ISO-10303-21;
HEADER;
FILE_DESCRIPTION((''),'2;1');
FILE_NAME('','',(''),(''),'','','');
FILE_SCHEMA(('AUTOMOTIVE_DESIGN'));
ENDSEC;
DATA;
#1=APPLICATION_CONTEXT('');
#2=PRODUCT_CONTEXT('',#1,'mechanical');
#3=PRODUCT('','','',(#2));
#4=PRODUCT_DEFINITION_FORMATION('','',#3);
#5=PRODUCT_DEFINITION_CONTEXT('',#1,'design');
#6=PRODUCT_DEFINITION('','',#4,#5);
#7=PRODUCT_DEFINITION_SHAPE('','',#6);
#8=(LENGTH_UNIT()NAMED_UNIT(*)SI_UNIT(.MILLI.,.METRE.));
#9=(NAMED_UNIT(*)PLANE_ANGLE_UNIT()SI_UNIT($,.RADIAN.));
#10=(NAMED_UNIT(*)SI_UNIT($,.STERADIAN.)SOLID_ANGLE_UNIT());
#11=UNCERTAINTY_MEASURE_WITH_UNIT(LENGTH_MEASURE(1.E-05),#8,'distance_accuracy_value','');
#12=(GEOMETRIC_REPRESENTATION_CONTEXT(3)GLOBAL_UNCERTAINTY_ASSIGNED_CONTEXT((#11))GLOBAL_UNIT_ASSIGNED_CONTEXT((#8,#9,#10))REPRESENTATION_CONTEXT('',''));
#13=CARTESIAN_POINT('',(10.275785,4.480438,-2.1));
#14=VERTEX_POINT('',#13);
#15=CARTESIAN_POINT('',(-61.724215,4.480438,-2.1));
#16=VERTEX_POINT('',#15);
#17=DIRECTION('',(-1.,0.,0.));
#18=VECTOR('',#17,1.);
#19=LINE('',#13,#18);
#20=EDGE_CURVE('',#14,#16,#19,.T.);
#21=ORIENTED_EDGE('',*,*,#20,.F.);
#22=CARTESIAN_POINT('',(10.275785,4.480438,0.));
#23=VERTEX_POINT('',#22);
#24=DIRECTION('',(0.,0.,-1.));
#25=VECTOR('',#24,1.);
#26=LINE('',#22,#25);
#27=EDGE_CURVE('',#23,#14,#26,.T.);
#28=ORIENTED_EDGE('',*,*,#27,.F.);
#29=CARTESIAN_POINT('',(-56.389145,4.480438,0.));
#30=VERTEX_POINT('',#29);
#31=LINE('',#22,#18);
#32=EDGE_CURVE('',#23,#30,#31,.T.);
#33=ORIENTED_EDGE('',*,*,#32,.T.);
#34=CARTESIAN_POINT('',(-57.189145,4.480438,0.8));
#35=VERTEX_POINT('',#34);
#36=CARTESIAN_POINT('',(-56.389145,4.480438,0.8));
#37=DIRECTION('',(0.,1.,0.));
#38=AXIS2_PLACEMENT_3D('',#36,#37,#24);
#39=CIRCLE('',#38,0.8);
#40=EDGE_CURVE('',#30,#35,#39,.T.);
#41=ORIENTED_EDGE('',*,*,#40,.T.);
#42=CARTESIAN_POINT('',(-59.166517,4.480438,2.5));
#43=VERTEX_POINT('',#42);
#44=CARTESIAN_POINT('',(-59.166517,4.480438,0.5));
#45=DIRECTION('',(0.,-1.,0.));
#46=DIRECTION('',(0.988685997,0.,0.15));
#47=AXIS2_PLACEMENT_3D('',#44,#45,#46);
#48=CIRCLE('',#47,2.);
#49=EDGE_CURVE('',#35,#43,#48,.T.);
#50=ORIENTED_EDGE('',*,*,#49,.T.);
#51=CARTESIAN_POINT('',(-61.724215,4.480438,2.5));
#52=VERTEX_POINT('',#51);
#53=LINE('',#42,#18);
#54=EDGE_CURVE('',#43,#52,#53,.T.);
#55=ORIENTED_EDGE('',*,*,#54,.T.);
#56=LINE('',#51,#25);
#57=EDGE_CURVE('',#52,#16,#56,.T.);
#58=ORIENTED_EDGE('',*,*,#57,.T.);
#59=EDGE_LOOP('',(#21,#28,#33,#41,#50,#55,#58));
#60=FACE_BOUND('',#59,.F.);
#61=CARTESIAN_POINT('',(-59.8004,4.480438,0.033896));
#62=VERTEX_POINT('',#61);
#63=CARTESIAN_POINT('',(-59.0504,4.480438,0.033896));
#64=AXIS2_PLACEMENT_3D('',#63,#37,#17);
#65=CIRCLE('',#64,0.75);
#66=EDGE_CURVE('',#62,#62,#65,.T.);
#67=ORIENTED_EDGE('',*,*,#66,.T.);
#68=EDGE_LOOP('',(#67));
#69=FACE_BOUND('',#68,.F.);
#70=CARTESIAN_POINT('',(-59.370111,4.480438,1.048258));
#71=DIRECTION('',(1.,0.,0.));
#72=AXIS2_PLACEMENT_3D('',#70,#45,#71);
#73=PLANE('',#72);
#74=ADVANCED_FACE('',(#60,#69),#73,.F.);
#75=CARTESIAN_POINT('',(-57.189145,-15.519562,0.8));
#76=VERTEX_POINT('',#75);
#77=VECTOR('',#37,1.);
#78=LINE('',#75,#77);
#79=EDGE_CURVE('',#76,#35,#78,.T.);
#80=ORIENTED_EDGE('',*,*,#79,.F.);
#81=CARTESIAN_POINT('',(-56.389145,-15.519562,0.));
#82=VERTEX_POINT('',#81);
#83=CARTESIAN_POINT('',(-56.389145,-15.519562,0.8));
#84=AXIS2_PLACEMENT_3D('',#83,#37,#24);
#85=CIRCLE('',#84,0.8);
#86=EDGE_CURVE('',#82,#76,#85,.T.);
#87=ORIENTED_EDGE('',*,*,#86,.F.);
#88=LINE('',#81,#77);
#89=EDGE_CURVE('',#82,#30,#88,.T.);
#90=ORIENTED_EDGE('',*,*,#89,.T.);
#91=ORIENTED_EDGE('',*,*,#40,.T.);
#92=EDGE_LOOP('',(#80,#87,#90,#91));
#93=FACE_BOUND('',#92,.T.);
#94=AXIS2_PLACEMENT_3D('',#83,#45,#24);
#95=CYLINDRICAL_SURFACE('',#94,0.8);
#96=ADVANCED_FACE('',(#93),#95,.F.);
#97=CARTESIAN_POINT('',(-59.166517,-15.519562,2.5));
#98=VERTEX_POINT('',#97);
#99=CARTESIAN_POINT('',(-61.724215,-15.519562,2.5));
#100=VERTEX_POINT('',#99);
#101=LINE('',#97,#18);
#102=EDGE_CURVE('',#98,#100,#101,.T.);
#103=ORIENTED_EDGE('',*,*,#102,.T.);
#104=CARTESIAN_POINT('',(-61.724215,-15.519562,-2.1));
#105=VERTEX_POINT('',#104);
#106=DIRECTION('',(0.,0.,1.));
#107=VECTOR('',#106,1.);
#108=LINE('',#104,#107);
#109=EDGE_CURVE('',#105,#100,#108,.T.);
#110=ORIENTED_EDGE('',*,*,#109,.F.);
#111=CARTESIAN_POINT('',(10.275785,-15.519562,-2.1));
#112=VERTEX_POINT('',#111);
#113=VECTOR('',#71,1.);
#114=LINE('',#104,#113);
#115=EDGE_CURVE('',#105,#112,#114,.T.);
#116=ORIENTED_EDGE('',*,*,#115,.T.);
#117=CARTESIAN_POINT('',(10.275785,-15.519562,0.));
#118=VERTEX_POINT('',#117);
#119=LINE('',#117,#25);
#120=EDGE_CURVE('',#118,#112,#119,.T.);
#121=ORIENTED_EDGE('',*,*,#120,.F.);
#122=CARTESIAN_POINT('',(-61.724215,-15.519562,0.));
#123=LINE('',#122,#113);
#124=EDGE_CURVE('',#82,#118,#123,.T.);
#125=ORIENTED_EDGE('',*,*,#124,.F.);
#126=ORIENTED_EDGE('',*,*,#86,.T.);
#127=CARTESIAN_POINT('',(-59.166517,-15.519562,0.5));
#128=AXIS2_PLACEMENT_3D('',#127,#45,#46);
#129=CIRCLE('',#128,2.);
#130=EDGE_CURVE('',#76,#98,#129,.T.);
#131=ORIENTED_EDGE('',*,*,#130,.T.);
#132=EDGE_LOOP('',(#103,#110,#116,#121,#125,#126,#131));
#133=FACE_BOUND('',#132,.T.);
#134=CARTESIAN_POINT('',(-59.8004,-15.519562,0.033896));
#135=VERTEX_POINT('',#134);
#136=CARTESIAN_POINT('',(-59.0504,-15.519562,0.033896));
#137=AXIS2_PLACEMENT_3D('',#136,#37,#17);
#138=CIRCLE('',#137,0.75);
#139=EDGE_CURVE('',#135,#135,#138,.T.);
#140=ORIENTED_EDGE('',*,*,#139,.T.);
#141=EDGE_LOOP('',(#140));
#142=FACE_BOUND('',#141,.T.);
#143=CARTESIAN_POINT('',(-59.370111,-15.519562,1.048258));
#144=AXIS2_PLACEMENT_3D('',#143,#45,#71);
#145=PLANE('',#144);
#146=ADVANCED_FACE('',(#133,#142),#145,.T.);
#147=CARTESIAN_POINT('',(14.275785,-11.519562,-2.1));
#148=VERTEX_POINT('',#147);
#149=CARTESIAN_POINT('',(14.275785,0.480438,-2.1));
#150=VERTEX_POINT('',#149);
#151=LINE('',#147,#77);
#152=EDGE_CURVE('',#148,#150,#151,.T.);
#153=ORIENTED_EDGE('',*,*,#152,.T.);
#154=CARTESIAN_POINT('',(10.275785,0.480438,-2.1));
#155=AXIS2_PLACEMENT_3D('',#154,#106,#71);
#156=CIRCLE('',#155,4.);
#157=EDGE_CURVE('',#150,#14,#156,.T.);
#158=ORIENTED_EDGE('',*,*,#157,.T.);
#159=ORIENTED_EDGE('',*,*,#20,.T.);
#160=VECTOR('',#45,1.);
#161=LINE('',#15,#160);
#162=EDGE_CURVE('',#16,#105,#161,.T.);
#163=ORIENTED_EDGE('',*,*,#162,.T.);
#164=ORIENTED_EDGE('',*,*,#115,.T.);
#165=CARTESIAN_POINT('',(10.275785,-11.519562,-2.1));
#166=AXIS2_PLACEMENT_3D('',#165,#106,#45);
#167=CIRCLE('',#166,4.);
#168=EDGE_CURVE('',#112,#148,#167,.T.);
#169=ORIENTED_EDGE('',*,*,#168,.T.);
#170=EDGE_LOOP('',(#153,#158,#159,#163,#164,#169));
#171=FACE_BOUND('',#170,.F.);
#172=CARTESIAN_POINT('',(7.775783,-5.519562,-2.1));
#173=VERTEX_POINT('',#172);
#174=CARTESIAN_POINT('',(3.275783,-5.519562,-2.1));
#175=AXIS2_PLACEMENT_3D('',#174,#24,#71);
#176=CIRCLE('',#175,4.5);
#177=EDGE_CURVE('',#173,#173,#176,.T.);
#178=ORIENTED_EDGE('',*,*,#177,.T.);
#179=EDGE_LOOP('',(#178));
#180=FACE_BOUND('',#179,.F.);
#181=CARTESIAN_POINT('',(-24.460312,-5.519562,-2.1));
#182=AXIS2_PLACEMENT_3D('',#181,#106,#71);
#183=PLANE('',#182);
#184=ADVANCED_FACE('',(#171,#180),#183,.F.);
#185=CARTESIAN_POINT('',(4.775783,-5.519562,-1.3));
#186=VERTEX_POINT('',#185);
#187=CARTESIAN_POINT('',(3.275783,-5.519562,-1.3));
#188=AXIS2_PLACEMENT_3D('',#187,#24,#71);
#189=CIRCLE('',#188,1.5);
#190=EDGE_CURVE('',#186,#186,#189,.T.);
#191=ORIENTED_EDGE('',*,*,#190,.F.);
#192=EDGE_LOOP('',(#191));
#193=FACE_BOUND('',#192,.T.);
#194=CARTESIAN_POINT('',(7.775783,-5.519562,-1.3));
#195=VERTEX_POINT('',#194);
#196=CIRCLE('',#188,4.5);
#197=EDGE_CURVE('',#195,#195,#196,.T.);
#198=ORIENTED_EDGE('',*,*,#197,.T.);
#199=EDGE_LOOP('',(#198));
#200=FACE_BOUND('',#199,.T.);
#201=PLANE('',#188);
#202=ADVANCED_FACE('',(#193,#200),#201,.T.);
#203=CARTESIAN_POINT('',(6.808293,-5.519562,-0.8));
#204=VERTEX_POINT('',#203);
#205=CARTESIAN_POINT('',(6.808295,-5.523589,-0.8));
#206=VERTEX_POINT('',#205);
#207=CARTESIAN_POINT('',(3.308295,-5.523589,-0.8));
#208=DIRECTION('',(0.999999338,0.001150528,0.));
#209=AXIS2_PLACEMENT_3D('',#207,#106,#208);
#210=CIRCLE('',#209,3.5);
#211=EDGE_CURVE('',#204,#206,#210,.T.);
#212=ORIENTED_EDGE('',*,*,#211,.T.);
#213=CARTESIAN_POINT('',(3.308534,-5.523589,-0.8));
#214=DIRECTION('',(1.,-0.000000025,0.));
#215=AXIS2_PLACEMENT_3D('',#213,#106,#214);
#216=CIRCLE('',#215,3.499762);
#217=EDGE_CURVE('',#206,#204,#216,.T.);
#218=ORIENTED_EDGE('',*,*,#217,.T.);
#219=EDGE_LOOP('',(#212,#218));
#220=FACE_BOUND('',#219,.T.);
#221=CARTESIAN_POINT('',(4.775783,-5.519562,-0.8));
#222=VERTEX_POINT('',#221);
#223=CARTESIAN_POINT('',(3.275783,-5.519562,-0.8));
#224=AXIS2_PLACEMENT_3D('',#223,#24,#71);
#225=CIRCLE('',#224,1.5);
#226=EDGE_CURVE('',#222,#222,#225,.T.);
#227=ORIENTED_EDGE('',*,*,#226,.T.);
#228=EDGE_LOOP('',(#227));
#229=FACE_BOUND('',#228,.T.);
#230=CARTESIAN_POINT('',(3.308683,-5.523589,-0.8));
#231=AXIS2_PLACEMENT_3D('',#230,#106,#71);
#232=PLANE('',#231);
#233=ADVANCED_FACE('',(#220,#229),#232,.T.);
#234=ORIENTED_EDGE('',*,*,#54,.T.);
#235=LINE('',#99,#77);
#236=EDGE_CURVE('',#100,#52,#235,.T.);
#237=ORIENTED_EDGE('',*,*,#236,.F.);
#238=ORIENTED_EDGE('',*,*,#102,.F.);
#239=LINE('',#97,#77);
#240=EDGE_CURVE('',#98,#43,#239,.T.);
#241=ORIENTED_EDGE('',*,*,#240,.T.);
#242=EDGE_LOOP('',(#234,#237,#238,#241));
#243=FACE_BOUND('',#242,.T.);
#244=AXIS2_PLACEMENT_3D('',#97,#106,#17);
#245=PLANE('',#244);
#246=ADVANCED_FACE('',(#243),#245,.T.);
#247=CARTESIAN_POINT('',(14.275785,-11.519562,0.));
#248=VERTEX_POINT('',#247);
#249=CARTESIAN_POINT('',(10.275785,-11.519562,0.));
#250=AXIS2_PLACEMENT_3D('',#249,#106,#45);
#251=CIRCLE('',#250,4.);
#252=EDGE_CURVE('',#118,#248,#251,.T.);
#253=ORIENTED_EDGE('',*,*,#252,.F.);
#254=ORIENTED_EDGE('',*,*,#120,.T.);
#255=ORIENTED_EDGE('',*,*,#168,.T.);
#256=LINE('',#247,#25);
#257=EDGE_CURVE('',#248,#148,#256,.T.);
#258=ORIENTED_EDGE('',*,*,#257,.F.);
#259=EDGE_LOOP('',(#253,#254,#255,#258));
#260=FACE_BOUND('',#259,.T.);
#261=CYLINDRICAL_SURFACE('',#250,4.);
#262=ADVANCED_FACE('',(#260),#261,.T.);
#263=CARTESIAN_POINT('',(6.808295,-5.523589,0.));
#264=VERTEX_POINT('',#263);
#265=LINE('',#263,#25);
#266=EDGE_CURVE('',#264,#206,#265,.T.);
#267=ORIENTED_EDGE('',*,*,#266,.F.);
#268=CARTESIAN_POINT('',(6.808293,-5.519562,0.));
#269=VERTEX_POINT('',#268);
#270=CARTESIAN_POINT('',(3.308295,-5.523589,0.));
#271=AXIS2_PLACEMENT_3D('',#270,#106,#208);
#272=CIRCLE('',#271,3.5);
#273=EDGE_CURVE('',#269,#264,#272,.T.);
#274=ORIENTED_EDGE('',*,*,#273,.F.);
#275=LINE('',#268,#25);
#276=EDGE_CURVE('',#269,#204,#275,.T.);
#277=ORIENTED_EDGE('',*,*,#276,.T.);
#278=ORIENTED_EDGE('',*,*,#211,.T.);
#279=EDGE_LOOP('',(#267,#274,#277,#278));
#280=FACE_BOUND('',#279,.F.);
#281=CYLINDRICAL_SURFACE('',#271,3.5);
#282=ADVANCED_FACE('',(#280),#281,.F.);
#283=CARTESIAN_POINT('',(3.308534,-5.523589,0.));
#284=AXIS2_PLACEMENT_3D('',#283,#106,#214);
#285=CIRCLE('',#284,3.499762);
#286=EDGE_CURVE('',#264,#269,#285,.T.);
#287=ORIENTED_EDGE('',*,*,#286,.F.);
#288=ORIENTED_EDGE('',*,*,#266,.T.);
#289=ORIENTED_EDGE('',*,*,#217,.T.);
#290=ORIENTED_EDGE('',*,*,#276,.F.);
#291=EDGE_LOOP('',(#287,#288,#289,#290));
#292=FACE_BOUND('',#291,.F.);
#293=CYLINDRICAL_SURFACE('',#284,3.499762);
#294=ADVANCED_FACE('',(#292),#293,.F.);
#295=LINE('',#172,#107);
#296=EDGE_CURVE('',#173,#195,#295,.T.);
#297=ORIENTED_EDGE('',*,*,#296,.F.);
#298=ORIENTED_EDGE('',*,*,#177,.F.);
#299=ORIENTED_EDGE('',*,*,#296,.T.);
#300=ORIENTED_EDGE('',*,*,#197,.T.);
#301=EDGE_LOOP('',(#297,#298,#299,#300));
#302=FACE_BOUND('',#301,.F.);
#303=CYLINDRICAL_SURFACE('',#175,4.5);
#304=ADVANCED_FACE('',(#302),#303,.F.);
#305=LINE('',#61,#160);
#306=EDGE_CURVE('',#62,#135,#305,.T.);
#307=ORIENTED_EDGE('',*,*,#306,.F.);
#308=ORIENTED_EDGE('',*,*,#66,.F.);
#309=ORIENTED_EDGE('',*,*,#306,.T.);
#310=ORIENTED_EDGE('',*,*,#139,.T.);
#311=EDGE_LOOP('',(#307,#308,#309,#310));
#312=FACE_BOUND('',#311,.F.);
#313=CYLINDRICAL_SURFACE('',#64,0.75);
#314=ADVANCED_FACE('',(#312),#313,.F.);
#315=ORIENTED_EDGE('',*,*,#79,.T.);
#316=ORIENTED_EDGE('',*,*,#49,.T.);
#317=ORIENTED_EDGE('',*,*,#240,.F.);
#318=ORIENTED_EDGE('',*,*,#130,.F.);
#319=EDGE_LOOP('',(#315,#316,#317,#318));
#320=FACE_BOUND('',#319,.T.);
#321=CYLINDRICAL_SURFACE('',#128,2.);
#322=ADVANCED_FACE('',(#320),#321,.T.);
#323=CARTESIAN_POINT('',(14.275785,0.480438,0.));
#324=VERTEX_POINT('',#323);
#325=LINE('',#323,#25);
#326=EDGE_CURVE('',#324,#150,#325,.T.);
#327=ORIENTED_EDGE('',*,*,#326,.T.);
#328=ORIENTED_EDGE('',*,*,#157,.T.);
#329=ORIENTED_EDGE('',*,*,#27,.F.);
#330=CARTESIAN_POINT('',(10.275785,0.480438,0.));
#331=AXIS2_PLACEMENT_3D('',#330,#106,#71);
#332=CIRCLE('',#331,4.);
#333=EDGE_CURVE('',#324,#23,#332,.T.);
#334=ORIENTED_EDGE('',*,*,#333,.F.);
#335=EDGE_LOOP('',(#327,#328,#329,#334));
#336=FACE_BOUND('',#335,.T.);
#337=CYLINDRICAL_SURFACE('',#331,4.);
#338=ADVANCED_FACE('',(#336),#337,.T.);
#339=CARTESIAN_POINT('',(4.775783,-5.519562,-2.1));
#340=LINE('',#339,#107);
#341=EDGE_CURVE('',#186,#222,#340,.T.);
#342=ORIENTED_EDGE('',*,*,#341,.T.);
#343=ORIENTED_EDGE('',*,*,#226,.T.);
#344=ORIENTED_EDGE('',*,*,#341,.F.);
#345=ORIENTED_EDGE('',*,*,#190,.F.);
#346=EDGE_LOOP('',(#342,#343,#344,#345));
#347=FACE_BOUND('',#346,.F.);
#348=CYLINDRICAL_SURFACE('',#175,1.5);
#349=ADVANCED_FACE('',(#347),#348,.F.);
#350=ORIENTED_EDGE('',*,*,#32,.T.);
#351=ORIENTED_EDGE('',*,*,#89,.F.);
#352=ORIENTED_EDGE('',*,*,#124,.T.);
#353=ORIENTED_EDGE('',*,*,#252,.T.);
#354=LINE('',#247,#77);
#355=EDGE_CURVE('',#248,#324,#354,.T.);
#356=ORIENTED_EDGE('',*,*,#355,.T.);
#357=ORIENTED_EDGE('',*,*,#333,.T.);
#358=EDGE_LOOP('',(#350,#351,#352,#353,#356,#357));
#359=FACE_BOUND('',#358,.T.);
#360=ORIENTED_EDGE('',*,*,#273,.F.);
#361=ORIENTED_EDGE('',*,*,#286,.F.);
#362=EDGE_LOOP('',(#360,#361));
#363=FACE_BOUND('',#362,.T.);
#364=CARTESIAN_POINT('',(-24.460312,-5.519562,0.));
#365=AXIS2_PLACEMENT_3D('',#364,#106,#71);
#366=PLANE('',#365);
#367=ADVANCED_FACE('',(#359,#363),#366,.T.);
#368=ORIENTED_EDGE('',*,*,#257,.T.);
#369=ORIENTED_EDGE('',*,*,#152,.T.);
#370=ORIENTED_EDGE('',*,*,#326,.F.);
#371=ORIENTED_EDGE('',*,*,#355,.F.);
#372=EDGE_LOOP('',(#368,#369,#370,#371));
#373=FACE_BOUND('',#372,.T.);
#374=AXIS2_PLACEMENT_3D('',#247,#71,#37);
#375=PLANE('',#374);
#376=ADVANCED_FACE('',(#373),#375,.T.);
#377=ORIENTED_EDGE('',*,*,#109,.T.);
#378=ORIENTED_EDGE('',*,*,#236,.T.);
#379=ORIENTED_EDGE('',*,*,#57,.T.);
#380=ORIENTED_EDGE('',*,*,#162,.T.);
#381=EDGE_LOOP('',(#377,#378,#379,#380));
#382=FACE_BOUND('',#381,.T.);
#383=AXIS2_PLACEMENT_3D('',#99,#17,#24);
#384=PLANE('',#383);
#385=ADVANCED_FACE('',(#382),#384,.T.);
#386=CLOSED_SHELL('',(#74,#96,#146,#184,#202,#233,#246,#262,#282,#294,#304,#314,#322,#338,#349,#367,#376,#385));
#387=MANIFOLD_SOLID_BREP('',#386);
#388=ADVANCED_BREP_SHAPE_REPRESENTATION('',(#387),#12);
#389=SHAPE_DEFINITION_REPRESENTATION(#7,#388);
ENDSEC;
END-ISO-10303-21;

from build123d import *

# Parameters (mm, degrees)
F1_DEPTH  = 2.1
F2_R      = 1.5
F3_DEPTH  = 2.101
F5_DEPTH  = 0.8
F6_R      = 4.5
F6_R_2    = 1.5
F7_DEPTH  = 0.8
F9_DEPTH  = 20
F10_R     = 0.75
F11_DEPTH = 20.001


# Not quite as in the source:
# - a feature names something its author has since deleted; it is built from what else it names


with BuildPart() as f1:
    # F0 (on Top) → F1 (new body)
    with BuildSketch(Plane.XY):
        with BuildLine():
            Line((-61.724215433, 4.4804378226), (-61.724215433, -15.5195621774))
            Line((-61.724215433, -15.5195621774), (10.275784567, -15.5195621774))
            ThreePointArc((10.275784567, -15.5195621774), (13.1042116917, -14.3479893021), (14.275784567, -11.5195621774))
            Line((14.275784567, -11.5195621774), (14.275784567, -5.5195621774))
            Line((14.275784567, -5.5195621774), (14.275784567, 0.4804378226))
            ThreePointArc((14.275784567, 0.4804378226), (13.1042116917, 3.3088649474), (10.275784567, 4.4804378226))
            Line((10.275784567, 4.4804378226), (-61.724215433, 4.4804378226))
        make_face()
    extrude(amount=-F1_DEPTH)

    # F2 (on face) → F3 (cut, through all)
    with BuildSketch(Plane(origin=(0, 0, -2.1), x_dir=(1, 0, 0), z_dir=(0, 0, -1))):
        with Locations((3.2757834997, 5.5195621774)):
            Circle(F2_R)
    extrude(amount=-F3_DEPTH, mode=Mode.SUBTRACT)

    # F4 (on face) → F5 (cut)
    with BuildSketch(Plane.XY):
        with BuildLine():
            ThreePointArc((6.808292926, -5.5195621774), (-0.1917041784, -5.5256023727), (6.8082952425, -5.523588974))
            ThreePointArc((6.8082952425, -5.523588974), (6.8082946634, -5.5215755754), (6.808292926, -5.5195621774))
        make_face()
    extrude(amount=-F5_DEPTH, mode=Mode.SUBTRACT)

    # F6 (on face) → F7 (cut)
    with BuildSketch(Plane(origin=(0, 0, -2.1), x_dir=(1, 0, 0), z_dir=(0, 0, -1))):
        with Locations((3.2757834997, 5.5195621774)):
            Circle(F6_R)
        with Locations((3.2757834997, 5.5195621774)):
            Circle(F6_R_2, mode=Mode.SUBTRACT)
    extrude(amount=-F7_DEPTH, mode=Mode.SUBTRACT)

    # F8 (on face) → F9 (join)
    with BuildSketch(Plane.XZ.offset(15.5195621774)):
        with BuildLine():
            Line((-59.1665172217, 2.5), (-61.724215433, 2.5))
            Line((-61.724215433, 2.5), (-61.724215433, 0))
            Line((-61.724215433, 0), (-57.1891452284, 0))
            Line((-57.1891452284, 0), (-56.3891452284, 0))
            ThreePointArc((-56.3891452284, 0), (-56.9548306533, 0.2343145751), (-57.1891452284, 0.8))
            ThreePointArc((-57.1891452284, 0.8), (-57.8626767407, 2.0165750888), (-59.1665172217, 2.5))
        make_face()
    extrude(amount=-F9_DEPTH)

    # F10 (on face) → F11 (cut, through all)
    with BuildSketch(Plane(origin=(0, 4.4804378226, 0), x_dir=(-1, 0, 0), z_dir=(0, 1, 0))):
        with Locations((59.05039973, 0.0338958319)):
            Circle(F10_R)
    extrude(amount=-F11_DEPTH, mode=Mode.SUBTRACT)


solid = f1.part
